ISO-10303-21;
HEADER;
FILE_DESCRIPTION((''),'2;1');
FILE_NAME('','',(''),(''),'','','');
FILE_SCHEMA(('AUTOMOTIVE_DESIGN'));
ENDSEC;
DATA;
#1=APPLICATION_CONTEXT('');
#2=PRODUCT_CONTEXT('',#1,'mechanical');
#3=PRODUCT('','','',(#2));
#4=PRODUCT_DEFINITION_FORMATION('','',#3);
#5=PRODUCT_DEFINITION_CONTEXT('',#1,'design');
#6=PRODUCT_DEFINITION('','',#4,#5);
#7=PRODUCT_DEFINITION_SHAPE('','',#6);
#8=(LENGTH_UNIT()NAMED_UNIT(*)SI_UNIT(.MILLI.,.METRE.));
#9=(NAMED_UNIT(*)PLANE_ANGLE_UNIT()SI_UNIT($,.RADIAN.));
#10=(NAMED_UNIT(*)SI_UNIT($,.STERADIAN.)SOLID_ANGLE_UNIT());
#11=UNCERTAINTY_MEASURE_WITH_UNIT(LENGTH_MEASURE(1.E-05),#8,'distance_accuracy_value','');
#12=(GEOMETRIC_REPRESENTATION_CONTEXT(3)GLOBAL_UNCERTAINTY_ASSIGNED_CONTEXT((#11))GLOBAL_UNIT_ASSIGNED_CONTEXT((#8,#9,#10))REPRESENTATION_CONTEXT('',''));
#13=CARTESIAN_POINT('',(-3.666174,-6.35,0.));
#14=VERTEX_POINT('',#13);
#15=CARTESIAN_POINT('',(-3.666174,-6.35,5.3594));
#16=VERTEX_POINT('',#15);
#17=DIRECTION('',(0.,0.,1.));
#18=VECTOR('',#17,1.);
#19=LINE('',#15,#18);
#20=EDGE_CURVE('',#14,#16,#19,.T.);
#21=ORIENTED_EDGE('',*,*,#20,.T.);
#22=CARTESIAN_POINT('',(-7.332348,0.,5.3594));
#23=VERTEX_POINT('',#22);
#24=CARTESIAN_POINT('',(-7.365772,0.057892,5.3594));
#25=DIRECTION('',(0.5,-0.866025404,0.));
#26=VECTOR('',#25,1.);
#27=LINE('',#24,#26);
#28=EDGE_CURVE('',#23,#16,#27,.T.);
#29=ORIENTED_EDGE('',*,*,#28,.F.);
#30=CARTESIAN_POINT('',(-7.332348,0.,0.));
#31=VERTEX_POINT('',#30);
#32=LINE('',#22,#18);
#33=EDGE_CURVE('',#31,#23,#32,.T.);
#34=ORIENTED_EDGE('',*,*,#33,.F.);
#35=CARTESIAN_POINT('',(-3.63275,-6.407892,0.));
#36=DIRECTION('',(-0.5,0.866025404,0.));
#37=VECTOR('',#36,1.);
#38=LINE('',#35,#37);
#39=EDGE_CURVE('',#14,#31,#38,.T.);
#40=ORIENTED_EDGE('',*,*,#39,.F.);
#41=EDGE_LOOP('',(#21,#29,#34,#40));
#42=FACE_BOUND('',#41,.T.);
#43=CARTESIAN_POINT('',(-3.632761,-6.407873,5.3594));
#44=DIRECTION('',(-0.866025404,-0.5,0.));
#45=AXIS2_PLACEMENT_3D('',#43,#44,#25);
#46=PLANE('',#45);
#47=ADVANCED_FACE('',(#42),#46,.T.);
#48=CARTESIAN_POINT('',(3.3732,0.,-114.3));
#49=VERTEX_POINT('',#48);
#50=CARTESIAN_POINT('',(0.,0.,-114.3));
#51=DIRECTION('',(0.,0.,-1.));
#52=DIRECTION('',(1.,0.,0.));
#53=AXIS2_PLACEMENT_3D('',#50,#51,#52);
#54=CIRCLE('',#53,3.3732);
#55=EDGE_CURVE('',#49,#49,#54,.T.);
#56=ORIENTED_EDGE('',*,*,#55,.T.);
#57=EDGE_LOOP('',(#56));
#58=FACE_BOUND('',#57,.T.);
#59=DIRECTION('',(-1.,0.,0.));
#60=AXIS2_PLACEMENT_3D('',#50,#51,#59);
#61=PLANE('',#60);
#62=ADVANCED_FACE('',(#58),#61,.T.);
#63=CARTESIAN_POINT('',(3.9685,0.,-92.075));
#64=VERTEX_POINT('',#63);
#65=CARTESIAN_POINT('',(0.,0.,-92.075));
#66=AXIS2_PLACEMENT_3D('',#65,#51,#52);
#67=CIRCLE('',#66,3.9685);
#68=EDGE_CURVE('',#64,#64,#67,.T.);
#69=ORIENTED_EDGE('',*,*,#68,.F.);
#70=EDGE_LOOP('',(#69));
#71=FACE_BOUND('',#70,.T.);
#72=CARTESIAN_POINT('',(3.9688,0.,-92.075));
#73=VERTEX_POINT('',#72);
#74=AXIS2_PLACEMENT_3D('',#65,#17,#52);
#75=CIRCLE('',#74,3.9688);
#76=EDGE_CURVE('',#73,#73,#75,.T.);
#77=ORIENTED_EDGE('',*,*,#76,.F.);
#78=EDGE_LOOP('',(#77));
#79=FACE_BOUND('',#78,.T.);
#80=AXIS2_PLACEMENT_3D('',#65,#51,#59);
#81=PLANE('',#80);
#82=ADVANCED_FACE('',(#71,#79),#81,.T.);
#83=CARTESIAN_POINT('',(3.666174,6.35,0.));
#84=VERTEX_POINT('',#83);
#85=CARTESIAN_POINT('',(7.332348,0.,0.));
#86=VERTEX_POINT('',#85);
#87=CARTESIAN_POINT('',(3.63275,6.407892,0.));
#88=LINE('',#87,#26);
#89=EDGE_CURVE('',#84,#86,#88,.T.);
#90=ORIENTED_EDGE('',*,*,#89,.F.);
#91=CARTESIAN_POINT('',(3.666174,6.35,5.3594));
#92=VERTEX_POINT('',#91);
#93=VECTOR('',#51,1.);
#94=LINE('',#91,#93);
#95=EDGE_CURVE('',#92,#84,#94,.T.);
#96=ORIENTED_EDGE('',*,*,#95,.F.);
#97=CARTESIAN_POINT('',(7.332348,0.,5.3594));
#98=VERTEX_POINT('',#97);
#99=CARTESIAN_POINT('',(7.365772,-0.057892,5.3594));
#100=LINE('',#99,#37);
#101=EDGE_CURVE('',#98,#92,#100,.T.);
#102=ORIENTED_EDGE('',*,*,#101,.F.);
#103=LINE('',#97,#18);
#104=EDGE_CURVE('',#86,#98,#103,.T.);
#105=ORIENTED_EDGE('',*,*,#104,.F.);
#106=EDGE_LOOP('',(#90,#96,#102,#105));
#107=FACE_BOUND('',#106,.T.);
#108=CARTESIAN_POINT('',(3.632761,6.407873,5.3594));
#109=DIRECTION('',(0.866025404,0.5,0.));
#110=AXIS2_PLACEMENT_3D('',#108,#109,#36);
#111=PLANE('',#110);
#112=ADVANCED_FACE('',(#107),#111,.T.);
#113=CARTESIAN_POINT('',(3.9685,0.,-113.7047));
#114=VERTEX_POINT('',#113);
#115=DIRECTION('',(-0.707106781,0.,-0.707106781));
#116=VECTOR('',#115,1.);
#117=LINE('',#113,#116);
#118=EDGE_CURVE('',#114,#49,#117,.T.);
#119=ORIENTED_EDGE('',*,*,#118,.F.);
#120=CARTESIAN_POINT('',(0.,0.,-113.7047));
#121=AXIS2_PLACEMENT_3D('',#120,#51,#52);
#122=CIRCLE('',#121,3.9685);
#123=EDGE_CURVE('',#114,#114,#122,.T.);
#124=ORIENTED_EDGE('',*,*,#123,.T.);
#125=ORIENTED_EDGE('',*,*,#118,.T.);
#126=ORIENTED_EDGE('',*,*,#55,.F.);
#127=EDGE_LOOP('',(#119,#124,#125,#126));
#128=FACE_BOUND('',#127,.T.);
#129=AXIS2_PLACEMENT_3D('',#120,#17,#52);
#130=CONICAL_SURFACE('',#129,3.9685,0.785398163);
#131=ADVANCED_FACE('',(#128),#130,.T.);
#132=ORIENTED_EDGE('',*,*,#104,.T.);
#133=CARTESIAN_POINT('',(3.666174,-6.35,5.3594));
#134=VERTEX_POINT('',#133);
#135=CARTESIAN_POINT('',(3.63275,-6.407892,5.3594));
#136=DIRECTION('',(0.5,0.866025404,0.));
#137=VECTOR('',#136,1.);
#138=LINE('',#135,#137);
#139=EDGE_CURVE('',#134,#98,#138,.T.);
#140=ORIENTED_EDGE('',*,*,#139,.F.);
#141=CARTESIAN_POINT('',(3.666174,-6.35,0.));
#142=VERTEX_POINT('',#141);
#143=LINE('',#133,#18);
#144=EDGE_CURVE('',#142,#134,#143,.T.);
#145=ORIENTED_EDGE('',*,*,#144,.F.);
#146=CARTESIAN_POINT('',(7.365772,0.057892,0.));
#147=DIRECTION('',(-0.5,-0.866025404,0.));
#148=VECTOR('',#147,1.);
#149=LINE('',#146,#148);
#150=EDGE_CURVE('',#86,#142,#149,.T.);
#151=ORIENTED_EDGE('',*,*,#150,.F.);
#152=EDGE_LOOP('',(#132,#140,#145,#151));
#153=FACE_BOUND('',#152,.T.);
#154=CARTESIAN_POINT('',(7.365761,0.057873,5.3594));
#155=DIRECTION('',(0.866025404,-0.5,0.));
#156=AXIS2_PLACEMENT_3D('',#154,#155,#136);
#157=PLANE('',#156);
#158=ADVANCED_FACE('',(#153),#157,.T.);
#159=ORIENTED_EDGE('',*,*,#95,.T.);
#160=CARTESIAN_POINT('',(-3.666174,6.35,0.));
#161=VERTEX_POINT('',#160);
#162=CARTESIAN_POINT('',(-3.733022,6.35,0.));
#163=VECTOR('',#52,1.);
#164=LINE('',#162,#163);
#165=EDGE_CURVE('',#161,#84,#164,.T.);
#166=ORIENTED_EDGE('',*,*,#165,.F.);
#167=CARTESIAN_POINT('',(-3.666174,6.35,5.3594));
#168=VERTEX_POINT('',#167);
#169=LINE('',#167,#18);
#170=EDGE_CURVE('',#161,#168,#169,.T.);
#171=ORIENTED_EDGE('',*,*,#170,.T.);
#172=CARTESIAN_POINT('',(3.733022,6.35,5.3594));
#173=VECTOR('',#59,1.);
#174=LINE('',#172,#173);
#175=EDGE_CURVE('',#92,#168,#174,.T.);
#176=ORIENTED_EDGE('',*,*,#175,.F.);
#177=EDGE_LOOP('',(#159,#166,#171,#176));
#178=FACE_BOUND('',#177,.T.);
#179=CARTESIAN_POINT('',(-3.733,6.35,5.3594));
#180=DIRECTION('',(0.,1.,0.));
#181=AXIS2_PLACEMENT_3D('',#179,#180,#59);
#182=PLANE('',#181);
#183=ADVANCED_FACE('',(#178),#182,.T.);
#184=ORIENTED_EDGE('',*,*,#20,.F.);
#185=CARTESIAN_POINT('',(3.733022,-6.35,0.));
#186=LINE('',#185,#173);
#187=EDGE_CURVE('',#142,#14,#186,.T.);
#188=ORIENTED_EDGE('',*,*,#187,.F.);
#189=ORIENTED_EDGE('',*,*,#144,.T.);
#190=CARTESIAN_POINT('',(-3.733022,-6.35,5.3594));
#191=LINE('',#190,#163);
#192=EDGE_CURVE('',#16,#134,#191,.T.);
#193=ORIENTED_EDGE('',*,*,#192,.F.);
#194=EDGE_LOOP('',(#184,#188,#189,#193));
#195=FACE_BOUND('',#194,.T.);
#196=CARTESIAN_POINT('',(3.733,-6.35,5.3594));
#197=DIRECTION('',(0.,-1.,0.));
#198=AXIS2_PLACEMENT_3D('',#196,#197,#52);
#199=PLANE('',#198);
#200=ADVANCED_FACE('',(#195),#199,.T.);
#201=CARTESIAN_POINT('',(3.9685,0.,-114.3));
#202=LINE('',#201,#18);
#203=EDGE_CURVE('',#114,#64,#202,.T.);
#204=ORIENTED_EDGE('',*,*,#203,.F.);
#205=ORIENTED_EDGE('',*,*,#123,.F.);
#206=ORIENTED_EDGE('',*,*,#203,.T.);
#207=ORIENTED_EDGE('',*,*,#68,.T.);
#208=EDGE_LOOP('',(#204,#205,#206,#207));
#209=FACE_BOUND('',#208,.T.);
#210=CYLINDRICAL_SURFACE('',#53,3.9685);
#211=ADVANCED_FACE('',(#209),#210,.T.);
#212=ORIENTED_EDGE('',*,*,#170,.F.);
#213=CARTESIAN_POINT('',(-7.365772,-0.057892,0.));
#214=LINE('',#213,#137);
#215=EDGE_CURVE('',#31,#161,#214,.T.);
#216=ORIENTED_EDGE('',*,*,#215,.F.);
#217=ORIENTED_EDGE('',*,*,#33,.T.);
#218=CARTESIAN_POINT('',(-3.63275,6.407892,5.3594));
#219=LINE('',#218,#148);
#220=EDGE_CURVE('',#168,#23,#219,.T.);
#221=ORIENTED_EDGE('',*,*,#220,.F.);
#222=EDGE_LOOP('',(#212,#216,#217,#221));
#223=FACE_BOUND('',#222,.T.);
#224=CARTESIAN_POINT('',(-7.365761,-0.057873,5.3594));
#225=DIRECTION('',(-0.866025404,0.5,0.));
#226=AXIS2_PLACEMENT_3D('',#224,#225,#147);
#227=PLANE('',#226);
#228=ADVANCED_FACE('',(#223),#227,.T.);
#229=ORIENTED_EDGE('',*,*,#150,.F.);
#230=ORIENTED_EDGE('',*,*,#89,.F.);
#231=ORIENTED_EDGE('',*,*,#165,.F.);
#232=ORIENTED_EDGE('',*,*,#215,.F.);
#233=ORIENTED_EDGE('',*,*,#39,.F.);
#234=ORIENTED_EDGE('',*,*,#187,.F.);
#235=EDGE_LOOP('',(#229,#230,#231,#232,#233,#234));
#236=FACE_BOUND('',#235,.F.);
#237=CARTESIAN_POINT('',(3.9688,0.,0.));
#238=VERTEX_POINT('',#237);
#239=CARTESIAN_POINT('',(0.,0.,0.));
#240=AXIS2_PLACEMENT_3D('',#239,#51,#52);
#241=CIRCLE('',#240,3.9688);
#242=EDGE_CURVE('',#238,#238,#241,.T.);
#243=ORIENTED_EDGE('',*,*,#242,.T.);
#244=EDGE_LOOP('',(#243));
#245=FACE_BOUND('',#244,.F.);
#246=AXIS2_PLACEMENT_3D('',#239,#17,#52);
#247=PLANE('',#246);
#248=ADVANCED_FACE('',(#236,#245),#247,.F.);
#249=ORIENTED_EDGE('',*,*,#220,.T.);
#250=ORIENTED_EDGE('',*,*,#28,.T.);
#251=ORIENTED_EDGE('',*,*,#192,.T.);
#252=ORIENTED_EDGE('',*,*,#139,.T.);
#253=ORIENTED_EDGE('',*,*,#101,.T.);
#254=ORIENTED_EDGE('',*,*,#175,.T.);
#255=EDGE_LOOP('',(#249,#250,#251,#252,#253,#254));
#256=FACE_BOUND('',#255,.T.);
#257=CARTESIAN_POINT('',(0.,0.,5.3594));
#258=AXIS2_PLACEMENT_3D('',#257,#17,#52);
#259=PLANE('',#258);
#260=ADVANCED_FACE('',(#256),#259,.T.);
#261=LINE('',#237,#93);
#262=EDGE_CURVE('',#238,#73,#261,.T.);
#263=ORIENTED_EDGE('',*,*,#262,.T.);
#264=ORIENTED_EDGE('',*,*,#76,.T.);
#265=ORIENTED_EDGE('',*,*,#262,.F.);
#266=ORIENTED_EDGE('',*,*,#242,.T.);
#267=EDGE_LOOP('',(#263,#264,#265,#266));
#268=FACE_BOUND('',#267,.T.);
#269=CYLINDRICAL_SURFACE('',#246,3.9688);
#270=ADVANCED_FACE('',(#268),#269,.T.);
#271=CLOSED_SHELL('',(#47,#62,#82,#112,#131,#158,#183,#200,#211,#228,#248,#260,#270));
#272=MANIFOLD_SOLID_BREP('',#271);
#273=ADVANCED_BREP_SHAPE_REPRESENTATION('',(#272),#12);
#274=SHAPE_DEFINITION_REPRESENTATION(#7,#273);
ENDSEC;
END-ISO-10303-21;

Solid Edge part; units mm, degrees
sketch "Sketch1" plane through (0, 0, 0) normal (0, 0, 1) x (1, 0, 0)
  circle A0 centre (0, 0) radius 7.366
  dimension "D1" = 14.732
extrude "Protrusion1" add sketch "Sketch1" along normal blind 5.3594
sketch "Sketch2" plane through (0, 0, 0) normal (0, 0, -1) x (1, 0, 0)
  circle A0 centre (0, 0) radius 3.9688
extrude "Protrusion2" add sketch "Sketch2" along normal blind 114.3
sketch "Sketch3" plane through (0, 0, -114.3) normal (0, 0, -1) x (1, 0, 0)
  circle A0 centre (0, 0) radius 3.9685
extrude "Cutout1" cut sketch "Sketch3" against normal blind 22.225 flip side to cut
chamfer "Chamfer_1" distance 0.5953 angle 45 1 edges at (-3.9685, 0, -114.3)
sketch "Sketch4" plane through (0, 0, 5.3594) normal (0, 0, 1) x (1, 0, 0)
  line L0 (-3.733, 6.35) -> (3.733, 6.35)
  dimension "D1" = 12.7
extrude "Cutout2" cut sketch "Sketch4" against normal up to next material side at (0, 6.4, 5.3594)
pattern_circular "Pattern1" count 6 over 360 about axis through (0, 0, 5.3594) along (0, 0, 1) of "Cutout2"
properties part number "24107075"
